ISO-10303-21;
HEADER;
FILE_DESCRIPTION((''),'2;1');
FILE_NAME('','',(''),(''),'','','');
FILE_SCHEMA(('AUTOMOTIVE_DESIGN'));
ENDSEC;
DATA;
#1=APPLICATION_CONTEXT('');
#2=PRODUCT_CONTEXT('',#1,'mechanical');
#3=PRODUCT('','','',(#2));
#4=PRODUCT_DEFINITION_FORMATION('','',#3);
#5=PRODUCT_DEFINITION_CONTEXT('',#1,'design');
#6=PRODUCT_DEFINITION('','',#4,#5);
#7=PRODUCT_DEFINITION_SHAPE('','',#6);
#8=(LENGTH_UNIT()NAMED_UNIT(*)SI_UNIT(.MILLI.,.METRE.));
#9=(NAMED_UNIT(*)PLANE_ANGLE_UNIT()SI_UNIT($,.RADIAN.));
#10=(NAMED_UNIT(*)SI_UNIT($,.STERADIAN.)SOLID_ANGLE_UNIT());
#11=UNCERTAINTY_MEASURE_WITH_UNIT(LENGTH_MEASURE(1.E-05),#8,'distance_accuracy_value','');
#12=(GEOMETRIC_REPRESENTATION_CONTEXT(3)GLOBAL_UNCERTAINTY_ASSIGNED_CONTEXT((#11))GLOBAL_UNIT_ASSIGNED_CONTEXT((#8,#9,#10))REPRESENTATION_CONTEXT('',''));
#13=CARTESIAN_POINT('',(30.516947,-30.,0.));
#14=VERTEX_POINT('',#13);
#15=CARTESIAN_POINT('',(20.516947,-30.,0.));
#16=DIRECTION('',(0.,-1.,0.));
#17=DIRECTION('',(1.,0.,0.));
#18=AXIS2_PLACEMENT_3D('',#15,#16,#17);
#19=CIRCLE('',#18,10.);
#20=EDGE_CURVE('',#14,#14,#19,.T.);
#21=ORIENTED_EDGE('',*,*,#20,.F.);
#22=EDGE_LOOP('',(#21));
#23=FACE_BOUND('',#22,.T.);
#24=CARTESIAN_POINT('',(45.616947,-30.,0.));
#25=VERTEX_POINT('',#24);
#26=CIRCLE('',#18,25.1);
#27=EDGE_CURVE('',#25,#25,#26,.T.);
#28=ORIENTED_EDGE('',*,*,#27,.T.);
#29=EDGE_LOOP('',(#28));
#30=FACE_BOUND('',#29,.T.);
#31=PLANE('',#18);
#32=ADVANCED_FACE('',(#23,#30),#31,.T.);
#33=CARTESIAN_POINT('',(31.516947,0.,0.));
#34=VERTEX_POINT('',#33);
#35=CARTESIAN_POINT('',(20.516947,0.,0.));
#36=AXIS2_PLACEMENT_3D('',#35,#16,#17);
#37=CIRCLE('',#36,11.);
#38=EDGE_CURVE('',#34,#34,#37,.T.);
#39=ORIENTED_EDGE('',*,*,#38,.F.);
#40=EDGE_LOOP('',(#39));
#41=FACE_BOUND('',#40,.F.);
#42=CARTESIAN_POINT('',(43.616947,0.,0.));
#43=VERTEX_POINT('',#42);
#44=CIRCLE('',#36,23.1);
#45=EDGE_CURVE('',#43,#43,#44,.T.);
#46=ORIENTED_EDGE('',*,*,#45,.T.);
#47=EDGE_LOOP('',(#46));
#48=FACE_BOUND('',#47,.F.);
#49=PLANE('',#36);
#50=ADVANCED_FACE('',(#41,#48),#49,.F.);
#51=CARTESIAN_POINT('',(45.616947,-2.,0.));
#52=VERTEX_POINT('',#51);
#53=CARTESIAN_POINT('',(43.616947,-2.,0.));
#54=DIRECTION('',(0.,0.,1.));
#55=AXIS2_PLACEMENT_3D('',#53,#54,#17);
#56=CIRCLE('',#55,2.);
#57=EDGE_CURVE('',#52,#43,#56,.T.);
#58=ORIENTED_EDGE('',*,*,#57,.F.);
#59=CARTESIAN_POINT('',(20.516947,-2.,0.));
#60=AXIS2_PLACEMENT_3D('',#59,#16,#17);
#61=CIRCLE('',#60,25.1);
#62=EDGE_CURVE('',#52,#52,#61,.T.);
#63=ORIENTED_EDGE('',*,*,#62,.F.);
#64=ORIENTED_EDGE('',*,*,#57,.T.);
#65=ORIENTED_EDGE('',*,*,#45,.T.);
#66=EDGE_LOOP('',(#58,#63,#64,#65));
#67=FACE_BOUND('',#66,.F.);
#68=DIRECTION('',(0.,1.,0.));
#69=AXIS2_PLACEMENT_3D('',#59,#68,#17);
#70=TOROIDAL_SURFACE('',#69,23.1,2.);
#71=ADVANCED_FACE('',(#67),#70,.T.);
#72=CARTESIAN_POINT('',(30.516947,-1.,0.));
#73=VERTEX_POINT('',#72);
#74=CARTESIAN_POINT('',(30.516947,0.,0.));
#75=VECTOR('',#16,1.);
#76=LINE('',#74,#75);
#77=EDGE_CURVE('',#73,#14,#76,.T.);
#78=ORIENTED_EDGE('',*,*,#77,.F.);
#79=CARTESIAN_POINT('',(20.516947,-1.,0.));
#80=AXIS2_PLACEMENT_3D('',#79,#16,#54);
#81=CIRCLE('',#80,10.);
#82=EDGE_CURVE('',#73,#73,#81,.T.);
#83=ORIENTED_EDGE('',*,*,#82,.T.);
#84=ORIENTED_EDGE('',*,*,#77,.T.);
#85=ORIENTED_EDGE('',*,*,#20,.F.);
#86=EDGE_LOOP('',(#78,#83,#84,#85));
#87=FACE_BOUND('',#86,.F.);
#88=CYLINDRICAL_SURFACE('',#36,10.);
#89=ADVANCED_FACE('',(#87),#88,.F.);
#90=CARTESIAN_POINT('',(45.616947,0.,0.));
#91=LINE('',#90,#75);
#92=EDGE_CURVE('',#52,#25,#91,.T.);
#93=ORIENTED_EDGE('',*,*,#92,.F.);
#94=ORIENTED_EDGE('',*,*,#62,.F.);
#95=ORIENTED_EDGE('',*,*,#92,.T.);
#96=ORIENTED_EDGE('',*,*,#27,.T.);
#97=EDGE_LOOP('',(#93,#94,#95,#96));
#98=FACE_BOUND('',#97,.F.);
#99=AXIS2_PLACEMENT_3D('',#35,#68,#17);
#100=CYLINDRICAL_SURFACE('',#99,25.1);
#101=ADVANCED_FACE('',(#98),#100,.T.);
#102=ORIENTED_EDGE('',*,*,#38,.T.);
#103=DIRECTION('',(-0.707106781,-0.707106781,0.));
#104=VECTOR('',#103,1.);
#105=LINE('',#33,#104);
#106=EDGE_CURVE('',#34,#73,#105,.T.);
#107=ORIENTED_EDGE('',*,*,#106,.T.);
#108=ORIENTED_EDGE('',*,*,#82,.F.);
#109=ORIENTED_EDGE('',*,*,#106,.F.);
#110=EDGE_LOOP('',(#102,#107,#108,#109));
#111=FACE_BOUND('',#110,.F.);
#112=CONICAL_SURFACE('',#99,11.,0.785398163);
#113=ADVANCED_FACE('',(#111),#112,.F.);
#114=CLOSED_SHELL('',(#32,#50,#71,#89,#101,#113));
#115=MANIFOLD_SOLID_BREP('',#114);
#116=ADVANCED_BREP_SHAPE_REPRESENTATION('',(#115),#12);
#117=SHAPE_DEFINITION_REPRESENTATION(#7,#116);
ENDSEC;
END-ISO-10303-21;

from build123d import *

# Parameters (mm, degrees)
F0_R           = 25.1
F1_DEPTH       = 30
F2_R           = 2
F5_D           = 20
F5_DEPTH       = 190
F5_CSINK_D     = 22
F5_CSINK_ANGLE = 90
F5_TIP         = 6.0086061903


# Not quite as in the source:
# - a feature of the source that left no trace in its solid (it failed there, or was rolled back) is left out


with BuildPart() as f1:
    # F0 (on Front) → F1 (new body)
    with BuildSketch(Plane.XZ):
        with Locations((20.5169470484, 0)):
            Circle(F0_R)
    extrude(amount=F1_DEPTH)

    # F2
    f2_edges = [f1.edges().sort_by_distance(p)[0] for p in [
        (-4.583053, 0, 0),
    ]]
    fillet(f2_edges, radius=F2_R)

    # F5
    with Locations(Plane(origin=(0, 0, 0), x_dir=(-1, 0, 0), z_dir=(0, 1, 0))):
        with Locations((-20.5169470484, 0)):
            CounterSinkHole(F5_D / 2, F5_CSINK_D / 2, depth=F5_DEPTH, counter_sink_angle=F5_CSINK_ANGLE)
            with Locations((0, 0, -(F5_DEPTH + F5_TIP / 2))):  # 118° drill point
                Cone(0, F5_D / 2, F5_TIP, mode=Mode.SUBTRACT)


solid = f1.part
